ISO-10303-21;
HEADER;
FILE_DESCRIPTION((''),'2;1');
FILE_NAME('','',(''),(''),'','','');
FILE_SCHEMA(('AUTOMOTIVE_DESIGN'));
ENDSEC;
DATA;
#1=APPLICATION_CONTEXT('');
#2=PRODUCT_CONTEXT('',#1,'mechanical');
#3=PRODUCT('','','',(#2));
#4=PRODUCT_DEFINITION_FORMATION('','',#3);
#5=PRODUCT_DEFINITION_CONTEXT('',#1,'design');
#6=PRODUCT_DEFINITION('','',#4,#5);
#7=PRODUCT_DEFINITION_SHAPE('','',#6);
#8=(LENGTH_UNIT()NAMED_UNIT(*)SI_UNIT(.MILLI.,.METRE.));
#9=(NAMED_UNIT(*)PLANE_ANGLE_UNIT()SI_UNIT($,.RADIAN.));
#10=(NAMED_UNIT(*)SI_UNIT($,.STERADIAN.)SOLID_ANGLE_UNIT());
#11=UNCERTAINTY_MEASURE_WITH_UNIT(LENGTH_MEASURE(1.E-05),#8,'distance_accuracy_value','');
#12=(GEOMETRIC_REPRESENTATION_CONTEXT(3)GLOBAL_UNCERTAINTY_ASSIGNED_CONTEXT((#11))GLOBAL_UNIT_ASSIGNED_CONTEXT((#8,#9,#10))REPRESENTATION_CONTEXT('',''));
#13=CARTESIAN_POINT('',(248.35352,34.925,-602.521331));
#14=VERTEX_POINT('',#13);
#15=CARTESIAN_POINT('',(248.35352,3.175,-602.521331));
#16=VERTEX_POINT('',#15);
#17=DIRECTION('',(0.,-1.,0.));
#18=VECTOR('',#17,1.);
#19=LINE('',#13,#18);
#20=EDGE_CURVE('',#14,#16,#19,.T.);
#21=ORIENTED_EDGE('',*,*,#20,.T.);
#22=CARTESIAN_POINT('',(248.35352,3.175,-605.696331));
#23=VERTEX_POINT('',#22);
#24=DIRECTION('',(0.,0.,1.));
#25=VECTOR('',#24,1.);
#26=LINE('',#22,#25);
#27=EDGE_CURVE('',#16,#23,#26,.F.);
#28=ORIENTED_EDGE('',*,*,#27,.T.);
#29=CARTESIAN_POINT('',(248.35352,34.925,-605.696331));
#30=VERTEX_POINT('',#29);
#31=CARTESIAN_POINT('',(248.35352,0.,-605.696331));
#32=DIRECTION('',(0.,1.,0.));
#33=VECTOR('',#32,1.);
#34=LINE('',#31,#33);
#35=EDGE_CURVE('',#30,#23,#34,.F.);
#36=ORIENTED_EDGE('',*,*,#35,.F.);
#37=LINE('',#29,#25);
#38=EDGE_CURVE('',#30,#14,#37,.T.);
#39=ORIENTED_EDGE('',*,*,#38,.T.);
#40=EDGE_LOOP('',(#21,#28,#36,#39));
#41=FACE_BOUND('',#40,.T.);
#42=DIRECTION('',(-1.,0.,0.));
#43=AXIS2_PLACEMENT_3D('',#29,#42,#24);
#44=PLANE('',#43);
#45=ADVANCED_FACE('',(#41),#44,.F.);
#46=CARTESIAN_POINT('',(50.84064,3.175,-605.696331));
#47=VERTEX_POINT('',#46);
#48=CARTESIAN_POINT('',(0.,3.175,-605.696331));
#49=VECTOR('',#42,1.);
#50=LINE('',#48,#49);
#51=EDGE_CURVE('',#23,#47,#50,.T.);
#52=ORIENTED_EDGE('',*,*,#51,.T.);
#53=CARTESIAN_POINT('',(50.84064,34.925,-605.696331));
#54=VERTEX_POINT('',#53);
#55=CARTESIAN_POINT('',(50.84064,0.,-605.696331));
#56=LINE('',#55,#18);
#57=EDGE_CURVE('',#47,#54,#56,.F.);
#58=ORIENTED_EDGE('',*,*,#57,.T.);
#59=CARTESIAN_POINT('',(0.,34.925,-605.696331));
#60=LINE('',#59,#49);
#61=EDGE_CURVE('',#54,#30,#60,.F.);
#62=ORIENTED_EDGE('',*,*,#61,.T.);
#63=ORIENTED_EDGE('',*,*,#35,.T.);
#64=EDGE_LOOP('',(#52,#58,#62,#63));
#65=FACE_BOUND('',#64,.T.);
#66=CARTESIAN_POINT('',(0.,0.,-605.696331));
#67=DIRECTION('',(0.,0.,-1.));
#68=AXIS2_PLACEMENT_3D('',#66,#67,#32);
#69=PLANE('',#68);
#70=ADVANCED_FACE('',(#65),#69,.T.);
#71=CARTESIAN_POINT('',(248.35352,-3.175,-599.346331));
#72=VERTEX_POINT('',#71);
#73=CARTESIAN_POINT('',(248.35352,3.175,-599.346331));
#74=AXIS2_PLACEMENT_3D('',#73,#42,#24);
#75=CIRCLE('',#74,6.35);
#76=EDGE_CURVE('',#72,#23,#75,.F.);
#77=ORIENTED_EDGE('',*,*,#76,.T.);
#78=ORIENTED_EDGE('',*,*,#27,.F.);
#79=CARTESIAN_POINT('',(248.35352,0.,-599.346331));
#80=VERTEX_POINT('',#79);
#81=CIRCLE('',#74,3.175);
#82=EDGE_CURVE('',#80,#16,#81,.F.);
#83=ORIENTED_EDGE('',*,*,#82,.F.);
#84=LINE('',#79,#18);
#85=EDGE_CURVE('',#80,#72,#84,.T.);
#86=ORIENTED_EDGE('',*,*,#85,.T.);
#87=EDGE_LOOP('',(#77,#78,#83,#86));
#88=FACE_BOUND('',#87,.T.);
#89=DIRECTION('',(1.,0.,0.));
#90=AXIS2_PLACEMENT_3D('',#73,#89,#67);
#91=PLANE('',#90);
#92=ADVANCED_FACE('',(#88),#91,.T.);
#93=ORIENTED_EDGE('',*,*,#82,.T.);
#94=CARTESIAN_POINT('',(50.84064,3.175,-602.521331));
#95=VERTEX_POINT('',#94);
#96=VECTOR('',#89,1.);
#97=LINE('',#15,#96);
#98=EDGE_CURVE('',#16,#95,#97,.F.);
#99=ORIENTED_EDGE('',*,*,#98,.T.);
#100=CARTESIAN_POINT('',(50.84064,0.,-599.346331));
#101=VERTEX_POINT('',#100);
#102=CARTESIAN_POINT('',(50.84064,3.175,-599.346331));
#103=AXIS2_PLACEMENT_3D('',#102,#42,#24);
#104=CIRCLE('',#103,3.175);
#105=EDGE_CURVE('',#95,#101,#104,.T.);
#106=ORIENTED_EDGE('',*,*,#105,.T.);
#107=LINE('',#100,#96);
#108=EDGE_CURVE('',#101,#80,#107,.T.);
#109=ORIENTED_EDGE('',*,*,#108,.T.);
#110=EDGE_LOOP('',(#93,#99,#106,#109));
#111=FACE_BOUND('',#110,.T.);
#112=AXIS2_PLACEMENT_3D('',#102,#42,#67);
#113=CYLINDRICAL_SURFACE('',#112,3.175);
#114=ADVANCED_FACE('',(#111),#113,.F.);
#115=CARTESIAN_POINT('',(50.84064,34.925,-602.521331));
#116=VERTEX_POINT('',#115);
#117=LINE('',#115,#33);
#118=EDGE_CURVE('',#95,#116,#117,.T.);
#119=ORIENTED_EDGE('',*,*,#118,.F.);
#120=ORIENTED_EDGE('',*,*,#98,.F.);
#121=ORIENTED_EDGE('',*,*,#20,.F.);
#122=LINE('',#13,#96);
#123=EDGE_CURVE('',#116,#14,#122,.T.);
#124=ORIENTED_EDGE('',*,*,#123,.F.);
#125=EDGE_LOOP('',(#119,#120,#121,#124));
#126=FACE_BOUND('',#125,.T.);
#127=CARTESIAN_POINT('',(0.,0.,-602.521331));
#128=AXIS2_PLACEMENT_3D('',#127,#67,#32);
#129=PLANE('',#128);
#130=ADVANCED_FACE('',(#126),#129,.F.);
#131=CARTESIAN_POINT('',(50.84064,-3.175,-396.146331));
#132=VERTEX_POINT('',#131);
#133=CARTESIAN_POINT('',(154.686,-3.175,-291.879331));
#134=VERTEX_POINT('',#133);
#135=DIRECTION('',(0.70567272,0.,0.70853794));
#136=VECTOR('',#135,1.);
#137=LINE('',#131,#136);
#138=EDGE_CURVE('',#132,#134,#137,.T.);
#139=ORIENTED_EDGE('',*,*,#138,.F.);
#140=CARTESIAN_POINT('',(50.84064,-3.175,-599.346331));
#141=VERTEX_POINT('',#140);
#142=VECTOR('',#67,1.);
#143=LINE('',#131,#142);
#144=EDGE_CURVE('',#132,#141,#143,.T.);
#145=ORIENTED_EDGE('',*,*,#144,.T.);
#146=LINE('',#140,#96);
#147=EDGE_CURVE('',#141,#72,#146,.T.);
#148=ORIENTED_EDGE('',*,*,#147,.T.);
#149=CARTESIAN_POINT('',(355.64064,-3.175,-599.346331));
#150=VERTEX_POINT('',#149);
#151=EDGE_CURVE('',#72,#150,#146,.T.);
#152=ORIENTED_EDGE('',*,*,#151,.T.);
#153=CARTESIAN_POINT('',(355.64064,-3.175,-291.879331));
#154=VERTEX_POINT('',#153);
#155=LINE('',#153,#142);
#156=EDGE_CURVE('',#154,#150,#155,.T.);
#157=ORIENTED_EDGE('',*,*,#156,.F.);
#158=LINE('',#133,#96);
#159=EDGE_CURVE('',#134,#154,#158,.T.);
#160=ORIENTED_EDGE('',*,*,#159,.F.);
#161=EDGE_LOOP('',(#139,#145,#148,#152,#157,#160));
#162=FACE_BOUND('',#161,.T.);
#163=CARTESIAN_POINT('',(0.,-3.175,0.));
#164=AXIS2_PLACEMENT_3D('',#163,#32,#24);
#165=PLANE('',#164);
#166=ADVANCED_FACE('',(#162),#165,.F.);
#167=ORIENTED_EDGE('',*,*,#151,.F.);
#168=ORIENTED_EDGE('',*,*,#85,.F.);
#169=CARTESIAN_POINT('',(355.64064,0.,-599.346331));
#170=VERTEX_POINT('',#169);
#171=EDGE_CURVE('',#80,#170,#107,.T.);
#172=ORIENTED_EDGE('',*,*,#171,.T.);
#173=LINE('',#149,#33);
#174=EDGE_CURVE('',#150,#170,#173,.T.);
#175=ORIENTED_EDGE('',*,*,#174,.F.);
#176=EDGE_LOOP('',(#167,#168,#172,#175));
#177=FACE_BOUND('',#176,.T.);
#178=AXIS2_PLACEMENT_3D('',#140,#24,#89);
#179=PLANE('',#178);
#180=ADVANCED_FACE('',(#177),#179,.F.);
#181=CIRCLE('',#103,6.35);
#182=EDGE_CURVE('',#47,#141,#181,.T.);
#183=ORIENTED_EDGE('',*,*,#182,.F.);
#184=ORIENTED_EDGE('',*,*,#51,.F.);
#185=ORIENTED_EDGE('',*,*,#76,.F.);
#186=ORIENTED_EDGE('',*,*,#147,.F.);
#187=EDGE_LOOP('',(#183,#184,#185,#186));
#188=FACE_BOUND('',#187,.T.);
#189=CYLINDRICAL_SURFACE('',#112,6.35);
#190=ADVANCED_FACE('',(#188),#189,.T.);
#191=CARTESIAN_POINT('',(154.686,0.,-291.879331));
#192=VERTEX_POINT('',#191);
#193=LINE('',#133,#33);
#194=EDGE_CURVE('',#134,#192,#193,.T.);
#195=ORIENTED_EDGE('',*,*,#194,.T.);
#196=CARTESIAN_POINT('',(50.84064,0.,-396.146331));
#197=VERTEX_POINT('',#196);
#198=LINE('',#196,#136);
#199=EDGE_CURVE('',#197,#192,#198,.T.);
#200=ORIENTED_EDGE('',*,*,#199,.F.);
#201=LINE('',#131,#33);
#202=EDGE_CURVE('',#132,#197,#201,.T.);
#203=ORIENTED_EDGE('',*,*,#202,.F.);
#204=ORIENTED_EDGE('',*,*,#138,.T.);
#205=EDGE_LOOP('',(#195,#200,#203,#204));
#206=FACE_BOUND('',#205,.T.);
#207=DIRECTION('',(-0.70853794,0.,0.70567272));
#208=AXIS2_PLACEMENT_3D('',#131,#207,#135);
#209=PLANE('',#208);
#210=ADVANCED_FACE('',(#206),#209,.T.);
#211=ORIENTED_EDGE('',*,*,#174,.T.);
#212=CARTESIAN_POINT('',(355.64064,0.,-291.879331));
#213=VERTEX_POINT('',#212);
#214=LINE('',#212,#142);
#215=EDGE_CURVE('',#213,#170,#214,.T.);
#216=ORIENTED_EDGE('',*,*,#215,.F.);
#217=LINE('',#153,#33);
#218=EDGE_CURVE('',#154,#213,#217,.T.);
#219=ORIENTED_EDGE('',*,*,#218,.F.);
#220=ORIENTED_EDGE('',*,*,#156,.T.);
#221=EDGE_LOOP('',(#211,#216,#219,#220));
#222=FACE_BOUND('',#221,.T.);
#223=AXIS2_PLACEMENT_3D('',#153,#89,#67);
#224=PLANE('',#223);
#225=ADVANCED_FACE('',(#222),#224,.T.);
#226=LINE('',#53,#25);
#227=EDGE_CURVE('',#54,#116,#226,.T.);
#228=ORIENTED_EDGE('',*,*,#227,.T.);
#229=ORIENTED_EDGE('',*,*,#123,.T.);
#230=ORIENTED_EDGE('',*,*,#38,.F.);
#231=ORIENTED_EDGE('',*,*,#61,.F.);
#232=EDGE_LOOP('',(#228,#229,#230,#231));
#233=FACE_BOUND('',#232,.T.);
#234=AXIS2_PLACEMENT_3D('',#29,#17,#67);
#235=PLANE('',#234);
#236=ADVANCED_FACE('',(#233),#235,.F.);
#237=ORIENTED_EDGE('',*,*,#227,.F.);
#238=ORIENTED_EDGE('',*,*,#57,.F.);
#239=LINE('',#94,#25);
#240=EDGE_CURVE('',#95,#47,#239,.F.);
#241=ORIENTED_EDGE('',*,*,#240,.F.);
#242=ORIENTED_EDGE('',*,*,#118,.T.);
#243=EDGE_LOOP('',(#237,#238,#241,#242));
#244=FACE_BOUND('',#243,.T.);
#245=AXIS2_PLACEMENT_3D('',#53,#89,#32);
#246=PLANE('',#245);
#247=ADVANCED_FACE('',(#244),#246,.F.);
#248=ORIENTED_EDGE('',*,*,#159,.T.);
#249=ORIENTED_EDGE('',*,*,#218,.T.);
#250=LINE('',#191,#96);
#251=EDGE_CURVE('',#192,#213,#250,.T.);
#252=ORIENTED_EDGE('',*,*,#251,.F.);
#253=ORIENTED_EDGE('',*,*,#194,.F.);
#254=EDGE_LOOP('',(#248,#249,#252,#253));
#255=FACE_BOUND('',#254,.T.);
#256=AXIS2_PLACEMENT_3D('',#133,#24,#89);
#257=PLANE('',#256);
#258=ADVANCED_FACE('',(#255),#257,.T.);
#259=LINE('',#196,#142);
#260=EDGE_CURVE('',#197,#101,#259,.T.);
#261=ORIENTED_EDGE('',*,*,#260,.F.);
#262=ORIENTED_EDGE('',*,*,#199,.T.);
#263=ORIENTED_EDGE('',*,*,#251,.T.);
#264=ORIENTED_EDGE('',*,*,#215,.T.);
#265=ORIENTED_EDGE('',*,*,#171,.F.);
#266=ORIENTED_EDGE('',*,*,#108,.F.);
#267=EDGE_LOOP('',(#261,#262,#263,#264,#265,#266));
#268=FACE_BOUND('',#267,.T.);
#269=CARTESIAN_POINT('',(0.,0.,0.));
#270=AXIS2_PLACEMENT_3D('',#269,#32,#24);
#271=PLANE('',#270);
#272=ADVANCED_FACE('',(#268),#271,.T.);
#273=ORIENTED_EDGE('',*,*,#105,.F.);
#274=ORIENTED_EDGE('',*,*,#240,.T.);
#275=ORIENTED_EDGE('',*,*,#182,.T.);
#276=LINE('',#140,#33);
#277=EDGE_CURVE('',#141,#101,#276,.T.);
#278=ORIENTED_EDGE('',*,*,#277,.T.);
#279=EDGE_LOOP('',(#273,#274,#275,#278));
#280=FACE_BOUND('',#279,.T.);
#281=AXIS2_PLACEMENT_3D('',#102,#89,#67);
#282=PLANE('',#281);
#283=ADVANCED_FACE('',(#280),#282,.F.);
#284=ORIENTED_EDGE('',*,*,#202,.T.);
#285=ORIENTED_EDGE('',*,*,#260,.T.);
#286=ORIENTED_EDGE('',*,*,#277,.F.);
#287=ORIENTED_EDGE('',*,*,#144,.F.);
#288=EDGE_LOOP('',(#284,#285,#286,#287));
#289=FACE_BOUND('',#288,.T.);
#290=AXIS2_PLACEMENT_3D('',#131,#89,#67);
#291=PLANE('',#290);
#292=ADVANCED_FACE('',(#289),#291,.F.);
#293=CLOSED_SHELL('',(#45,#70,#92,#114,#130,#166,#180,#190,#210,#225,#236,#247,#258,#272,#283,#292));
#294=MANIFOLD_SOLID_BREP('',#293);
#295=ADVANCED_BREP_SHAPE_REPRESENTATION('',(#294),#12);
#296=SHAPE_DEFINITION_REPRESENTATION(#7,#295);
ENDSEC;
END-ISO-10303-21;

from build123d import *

# Parameters (mm, degrees)
BASE_FLANGE1_START = -3.175
BASE_FLANGE1_DEPTH = 3.175
EDGE_FLANGE1_DEPTH = 197.512880056


# Read off the part's stored shape, not the designer's step: Base-Flange1
# Sheet-metal steps are written as plain solids
with BuildPart() as part:
    # Base-Flange1 outline → Base-Flange1 (new body)
    with BuildSketch(Plane(origin=(0, 0, 0), x_dir=(1, 0, 0), z_dir=(0, 1, 0)).offset(BASE_FLANGE1_START)):
        Polygon((50.84064, 599.346330946), (50.84064, 396.146330946), (154.686, 291.879330946), (355.64064, 291.879330946), (355.64064, 599.346330946), align=None)
    extrude(amount=BASE_FLANGE1_DEPTH)

    # Edge-Flange1 section (across the edge) → Edge-Flange1 (add)
    with BuildSketch(Plane(origin=(248.353520056, 0, -602.521330946), x_dir=(0, 0, 1), z_dir=(-1, 0, 0))):
        with BuildLine():
            Line((-3.175, 3.175), (-3.175, 34.925))
            Line((-3.175, 34.925), (0, 34.925))
            Line((0, 34.925), (0, 3.175))
            ThreePointArc((0, 3.175), (0.92993597, 0.92993597), (3.175, 0))
            Line((3.175, 0), (3.175, -3.175))
            ThreePointArc((3.175, -3.175), (-1.315128061, -1.315128061), (-3.175, 3.175))
        make_face()
    extrude(amount=EDGE_FLANGE1_DEPTH)


solid = part.part
